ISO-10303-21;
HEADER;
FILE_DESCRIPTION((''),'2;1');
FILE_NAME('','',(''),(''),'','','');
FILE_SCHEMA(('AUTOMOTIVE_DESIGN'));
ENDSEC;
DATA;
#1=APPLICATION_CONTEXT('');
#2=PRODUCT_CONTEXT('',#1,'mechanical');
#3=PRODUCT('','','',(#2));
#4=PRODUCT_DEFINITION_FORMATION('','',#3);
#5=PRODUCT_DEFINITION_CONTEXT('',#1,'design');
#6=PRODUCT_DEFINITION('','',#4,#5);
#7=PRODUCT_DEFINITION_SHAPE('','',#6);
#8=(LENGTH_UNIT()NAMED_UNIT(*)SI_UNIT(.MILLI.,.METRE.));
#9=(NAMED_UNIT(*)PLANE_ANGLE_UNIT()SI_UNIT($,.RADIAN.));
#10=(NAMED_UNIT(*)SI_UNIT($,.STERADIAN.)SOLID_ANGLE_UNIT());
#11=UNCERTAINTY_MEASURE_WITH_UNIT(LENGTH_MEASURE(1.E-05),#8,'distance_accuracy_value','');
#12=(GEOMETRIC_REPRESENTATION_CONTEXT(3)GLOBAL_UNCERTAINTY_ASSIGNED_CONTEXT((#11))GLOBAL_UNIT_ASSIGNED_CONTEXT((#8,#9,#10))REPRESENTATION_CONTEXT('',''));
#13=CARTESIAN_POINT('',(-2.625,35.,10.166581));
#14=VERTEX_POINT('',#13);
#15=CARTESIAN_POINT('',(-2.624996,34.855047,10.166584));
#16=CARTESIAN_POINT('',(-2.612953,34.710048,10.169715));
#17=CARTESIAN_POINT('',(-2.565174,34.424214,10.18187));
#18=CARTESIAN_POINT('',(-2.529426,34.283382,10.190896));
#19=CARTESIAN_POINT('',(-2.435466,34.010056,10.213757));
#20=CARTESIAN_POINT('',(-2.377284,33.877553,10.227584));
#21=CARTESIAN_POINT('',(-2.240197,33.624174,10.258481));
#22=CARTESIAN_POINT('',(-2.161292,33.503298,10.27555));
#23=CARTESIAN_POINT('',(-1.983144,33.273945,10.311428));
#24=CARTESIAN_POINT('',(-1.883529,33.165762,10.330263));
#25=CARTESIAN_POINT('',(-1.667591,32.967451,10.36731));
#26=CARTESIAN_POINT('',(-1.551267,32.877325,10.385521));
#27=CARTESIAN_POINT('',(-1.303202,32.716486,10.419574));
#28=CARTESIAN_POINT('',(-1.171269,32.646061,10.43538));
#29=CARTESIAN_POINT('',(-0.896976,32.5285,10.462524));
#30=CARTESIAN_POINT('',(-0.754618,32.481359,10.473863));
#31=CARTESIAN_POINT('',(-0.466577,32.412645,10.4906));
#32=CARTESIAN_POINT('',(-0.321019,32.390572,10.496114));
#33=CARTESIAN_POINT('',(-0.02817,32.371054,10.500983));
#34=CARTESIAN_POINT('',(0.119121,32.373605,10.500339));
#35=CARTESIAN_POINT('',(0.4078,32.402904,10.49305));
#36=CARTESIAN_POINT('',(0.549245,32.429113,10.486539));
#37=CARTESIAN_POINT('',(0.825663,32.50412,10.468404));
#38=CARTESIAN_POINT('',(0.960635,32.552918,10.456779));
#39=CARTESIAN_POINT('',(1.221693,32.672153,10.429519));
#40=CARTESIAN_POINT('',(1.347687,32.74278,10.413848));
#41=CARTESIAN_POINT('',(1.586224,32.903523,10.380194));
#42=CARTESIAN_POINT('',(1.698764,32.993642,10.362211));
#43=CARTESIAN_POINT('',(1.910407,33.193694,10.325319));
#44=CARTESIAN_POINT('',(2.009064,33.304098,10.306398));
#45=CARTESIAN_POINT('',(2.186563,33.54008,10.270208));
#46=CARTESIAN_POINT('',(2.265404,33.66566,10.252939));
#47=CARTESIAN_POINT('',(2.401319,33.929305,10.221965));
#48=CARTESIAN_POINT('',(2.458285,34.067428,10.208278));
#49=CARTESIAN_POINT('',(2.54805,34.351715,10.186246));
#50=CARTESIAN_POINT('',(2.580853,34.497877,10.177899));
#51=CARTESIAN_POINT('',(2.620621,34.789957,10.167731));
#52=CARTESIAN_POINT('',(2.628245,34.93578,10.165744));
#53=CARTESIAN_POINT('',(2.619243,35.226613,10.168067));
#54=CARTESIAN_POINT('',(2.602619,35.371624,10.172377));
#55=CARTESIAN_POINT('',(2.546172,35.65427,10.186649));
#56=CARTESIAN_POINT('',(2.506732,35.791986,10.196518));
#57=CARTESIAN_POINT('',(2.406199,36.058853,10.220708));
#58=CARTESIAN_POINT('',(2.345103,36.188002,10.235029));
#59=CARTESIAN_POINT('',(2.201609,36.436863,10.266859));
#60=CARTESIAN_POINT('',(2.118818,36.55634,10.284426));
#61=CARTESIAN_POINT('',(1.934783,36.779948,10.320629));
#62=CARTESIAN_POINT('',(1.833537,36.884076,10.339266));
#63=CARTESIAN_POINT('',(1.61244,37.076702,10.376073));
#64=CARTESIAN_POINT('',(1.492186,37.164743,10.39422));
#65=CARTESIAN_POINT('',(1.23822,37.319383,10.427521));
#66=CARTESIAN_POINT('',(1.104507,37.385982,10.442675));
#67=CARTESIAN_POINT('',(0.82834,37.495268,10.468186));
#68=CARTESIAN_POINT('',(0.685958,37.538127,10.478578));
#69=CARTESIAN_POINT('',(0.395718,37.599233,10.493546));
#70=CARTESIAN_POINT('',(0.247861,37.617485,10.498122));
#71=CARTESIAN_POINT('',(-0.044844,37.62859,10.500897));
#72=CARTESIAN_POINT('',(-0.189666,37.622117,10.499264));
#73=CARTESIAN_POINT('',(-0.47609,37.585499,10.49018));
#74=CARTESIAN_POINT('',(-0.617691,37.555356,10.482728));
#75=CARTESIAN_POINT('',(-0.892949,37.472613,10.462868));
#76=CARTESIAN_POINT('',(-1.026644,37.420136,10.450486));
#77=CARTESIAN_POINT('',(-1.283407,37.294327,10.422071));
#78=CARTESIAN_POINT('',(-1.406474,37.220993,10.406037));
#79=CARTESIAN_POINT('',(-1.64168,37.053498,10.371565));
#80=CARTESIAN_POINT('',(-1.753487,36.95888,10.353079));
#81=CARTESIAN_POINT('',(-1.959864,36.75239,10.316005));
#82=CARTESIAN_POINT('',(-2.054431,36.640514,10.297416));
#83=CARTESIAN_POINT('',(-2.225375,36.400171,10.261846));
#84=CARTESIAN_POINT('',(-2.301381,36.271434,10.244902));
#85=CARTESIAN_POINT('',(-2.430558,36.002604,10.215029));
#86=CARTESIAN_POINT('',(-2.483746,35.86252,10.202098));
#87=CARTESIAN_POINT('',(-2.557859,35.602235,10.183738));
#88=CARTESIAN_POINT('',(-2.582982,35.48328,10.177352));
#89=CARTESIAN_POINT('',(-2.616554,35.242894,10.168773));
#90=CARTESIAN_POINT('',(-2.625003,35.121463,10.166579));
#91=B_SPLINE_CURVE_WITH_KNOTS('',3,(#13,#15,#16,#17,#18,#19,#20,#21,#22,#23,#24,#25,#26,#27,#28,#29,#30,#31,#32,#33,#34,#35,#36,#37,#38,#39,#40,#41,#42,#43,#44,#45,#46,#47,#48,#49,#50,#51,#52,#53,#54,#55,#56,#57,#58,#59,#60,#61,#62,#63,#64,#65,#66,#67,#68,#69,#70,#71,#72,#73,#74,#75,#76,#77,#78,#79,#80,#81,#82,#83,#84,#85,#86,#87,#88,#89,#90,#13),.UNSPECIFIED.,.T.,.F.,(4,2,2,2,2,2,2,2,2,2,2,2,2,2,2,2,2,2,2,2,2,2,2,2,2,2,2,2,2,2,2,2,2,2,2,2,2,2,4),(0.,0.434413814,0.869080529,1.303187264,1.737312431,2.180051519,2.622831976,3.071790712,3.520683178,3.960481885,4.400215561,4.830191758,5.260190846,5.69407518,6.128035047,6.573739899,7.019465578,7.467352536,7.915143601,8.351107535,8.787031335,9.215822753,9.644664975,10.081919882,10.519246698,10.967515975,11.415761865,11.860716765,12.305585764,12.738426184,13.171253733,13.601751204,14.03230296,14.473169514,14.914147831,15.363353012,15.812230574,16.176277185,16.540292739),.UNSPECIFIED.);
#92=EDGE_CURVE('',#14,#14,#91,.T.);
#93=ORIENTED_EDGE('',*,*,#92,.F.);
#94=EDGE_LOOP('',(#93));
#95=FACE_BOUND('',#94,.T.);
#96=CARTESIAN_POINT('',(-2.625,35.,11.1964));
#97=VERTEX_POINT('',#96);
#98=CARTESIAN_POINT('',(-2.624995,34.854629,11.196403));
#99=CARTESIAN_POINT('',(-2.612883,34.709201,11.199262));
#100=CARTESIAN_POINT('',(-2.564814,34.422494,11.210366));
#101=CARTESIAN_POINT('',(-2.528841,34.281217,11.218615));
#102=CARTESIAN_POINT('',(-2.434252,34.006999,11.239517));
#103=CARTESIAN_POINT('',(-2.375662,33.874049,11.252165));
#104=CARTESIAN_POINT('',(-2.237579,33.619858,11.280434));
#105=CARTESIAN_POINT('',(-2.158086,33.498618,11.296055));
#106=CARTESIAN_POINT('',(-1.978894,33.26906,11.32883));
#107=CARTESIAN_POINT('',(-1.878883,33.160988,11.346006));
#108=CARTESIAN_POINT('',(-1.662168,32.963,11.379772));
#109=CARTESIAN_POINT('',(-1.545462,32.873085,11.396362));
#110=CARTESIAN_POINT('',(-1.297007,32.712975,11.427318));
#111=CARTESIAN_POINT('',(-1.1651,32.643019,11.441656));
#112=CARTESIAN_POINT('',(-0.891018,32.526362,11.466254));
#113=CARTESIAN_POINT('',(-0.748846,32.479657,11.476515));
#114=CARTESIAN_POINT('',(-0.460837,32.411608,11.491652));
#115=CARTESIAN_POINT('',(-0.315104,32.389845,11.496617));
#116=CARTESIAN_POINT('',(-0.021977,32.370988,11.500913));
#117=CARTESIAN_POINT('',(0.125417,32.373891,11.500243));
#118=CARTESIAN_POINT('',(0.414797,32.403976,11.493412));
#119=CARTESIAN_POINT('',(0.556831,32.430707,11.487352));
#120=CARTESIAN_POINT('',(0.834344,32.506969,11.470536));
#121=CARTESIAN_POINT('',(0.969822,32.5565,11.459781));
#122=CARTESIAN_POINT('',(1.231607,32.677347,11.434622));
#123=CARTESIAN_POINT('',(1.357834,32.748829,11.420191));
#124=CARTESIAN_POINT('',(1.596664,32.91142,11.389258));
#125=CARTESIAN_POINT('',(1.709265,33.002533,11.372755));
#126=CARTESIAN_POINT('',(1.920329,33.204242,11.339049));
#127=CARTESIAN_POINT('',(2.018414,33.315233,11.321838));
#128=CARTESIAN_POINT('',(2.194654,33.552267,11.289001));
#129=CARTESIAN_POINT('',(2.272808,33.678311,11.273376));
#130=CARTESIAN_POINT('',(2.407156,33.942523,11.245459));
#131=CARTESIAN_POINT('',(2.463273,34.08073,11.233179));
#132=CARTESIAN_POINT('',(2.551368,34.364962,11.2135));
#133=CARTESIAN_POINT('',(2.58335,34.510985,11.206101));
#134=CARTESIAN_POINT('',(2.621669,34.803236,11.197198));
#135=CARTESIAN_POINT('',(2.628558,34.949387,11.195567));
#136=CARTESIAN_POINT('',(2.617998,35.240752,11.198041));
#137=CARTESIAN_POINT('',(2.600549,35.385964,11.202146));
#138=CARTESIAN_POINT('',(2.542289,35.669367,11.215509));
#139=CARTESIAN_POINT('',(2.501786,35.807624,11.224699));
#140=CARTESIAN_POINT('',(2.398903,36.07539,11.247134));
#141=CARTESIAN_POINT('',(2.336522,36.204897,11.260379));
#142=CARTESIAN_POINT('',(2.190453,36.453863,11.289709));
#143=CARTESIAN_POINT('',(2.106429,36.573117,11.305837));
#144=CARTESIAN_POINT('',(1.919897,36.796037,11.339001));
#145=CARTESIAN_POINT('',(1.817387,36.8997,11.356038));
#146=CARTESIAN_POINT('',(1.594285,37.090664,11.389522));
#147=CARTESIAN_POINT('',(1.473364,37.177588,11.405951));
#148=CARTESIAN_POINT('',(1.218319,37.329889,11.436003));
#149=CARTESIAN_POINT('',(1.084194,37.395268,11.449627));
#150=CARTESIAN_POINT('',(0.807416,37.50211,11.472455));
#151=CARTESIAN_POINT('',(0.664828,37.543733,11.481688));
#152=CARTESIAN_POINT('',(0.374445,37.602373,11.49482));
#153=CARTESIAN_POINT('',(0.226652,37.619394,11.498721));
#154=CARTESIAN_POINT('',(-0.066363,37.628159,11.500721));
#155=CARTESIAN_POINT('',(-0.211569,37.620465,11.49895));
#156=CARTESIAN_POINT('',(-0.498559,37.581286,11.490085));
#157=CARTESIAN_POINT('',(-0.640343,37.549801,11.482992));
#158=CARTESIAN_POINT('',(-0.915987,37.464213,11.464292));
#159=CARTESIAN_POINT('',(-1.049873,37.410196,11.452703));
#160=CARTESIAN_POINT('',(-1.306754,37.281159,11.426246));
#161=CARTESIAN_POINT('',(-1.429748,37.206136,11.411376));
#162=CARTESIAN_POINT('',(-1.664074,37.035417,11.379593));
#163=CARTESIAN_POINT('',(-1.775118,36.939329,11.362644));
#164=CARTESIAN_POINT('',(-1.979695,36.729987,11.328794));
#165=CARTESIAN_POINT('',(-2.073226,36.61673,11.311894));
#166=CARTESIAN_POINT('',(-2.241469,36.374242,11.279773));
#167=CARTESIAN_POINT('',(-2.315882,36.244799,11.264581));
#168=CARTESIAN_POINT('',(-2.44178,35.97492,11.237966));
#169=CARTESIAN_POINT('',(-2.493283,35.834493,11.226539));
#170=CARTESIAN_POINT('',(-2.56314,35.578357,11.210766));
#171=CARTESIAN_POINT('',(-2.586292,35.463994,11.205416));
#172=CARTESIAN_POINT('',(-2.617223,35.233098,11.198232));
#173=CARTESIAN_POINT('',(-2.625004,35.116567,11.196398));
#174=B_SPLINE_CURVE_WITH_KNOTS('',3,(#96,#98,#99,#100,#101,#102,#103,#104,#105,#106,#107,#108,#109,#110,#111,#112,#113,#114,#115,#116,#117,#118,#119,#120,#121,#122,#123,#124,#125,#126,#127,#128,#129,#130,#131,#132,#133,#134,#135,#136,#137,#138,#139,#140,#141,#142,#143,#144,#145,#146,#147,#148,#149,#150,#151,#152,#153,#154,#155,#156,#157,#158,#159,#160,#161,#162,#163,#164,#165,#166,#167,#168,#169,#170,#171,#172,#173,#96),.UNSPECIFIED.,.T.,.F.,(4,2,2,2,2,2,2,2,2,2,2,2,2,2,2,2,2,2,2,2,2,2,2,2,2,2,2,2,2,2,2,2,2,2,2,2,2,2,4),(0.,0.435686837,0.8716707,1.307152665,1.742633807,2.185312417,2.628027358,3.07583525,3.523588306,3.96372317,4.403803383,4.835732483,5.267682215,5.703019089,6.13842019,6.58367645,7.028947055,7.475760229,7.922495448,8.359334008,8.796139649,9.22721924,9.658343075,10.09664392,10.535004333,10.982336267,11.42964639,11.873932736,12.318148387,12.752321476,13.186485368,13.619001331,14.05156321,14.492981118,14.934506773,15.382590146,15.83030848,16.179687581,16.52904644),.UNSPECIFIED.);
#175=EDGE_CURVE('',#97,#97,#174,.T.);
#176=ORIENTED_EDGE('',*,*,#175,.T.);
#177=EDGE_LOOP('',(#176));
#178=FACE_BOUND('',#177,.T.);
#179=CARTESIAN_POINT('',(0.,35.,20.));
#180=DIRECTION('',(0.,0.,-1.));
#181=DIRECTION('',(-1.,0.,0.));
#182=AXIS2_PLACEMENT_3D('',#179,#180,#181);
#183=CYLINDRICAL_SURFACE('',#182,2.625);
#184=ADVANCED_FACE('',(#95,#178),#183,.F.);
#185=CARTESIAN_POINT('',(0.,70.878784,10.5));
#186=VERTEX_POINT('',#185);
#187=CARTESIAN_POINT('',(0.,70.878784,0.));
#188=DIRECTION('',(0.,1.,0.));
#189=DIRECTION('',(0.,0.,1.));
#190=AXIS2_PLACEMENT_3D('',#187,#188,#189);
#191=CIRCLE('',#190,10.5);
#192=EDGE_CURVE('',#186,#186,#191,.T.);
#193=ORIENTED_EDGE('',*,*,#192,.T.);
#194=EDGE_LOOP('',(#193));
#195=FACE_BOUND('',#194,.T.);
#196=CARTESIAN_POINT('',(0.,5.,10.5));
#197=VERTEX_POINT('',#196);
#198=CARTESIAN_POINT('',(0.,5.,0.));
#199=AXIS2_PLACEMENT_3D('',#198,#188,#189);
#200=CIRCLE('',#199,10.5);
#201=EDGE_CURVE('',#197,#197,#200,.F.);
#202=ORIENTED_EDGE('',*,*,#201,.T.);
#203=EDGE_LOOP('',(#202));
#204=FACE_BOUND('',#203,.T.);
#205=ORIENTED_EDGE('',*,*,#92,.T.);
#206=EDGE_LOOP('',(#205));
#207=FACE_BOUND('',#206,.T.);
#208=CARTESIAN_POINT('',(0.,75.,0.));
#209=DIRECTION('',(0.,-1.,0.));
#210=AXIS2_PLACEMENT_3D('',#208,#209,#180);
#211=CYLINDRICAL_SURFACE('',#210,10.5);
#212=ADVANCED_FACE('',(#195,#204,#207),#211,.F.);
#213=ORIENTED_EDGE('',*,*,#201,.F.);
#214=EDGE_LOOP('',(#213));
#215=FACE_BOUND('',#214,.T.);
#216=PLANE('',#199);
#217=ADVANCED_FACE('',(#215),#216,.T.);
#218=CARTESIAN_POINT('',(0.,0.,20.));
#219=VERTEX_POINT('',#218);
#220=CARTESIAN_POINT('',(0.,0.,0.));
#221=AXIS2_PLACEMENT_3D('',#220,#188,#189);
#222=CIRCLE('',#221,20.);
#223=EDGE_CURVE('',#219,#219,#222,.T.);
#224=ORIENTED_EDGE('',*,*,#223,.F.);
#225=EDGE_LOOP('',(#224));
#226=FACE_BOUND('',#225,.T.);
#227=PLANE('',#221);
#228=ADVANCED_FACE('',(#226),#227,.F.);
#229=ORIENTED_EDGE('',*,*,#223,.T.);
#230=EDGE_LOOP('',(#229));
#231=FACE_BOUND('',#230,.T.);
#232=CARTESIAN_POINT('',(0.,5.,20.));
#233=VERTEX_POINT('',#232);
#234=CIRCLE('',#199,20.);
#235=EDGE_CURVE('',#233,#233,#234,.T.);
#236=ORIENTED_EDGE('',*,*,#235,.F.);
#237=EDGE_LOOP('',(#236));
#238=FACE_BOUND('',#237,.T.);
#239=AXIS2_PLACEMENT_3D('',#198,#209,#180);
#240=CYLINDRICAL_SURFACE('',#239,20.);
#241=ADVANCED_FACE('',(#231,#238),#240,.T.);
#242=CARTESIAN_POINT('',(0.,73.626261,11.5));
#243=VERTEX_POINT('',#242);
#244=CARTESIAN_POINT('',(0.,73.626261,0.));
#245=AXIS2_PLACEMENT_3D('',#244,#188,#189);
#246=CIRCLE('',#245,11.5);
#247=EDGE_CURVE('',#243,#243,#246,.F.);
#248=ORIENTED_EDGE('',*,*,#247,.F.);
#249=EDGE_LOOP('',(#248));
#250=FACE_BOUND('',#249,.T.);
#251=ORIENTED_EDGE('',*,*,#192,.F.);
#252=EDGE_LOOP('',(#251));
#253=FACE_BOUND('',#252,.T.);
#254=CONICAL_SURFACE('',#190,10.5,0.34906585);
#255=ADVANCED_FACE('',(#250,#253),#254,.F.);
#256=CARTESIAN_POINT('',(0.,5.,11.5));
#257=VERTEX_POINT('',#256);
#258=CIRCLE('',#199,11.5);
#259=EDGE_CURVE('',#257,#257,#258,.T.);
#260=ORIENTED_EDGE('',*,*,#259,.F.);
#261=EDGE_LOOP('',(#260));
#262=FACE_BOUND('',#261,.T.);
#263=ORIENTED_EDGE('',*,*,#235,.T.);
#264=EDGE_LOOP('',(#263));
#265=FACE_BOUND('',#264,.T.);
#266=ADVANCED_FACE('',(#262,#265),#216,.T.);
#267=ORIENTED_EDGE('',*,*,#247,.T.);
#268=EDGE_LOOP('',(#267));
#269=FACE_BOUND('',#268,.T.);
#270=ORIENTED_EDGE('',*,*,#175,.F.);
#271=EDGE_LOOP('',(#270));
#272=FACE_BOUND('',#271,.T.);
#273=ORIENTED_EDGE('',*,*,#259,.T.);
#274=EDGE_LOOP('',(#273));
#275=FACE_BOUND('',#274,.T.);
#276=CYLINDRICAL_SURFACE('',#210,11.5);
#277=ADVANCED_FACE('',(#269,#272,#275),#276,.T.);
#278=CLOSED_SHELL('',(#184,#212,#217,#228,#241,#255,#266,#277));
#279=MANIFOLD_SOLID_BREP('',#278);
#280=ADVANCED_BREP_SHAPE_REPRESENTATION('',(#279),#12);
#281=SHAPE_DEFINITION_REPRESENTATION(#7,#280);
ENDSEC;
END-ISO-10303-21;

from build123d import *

# Parameters (mm, degrees)
SKETCH1_R           = 20
BOSS_EXTRUDE1_DEPTH = 5
SKETCH2_R           = 11.5
SKETCH2_R_2         = 10.5
BOSS_EXTRUDE2_DEPTH = 70
SKETCH3_R           = 2.625
CUT_EXTRUDE1_DEPTH  = 81.156097709
CHAMFER1_SIZE       = 1.5
CHAMFER1_SIZE_2     = 4.121216129


with BuildPart() as part:
    # Sketch1 → Boss-Extrude1 (new body)
    with BuildSketch(Plane(origin=(0, 0, 0), x_dir=(1, 0, 0), z_dir=(0, 1, 0))):
        with Locations(Location((0, 0, 0), (0, 0, 270))):
            Circle(SKETCH1_R)
    extrude(amount=BOSS_EXTRUDE1_DEPTH)

    # Sketch2 → Boss-Extrude2 (add)
    with BuildSketch(Plane(origin=(0, 5, 0), x_dir=(1, 0, 0), z_dir=(0, 1, 0))):
        with Locations(Location((0, 0, 0), (0, 0, 270))):
            Circle(SKETCH2_R)
        with Locations(Location((0, 0, 0), (0, 0, 270))):
            Circle(SKETCH2_R_2, mode=Mode.SUBTRACT)
    extrude(amount=BOSS_EXTRUDE2_DEPTH)

    # Sketch3 → Cut-Extrude1 (cut, through all)
    with BuildSketch(Plane.XY):
        with Locations(Location((0, 35, 0), (0, 0, 180))):
            Circle(SKETCH3_R)
    extrude(amount=CUT_EXTRUDE1_DEPTH, mode=Mode.SUBTRACT)

    # Chamfer1
    # the kernel refuses this chamfer: 4.121216129, 1.5 mm, written as the material it takes off along each edge
    with BuildSketch(Plane(origin=(0, 75, 0), x_dir=(0, 0, 1), z_dir=(-1, 0, 0))) as chamfer1_piece_1:
        Polygon((10.5 + CHAMFER1_SIZE, 0), (10.5, -CHAMFER1_SIZE_2), (10.5, 0), align=None)
    revolve(axis=Axis((0, 75, 0), (0, 1, 0)), mode=Mode.SUBTRACT)


solid = part.part
